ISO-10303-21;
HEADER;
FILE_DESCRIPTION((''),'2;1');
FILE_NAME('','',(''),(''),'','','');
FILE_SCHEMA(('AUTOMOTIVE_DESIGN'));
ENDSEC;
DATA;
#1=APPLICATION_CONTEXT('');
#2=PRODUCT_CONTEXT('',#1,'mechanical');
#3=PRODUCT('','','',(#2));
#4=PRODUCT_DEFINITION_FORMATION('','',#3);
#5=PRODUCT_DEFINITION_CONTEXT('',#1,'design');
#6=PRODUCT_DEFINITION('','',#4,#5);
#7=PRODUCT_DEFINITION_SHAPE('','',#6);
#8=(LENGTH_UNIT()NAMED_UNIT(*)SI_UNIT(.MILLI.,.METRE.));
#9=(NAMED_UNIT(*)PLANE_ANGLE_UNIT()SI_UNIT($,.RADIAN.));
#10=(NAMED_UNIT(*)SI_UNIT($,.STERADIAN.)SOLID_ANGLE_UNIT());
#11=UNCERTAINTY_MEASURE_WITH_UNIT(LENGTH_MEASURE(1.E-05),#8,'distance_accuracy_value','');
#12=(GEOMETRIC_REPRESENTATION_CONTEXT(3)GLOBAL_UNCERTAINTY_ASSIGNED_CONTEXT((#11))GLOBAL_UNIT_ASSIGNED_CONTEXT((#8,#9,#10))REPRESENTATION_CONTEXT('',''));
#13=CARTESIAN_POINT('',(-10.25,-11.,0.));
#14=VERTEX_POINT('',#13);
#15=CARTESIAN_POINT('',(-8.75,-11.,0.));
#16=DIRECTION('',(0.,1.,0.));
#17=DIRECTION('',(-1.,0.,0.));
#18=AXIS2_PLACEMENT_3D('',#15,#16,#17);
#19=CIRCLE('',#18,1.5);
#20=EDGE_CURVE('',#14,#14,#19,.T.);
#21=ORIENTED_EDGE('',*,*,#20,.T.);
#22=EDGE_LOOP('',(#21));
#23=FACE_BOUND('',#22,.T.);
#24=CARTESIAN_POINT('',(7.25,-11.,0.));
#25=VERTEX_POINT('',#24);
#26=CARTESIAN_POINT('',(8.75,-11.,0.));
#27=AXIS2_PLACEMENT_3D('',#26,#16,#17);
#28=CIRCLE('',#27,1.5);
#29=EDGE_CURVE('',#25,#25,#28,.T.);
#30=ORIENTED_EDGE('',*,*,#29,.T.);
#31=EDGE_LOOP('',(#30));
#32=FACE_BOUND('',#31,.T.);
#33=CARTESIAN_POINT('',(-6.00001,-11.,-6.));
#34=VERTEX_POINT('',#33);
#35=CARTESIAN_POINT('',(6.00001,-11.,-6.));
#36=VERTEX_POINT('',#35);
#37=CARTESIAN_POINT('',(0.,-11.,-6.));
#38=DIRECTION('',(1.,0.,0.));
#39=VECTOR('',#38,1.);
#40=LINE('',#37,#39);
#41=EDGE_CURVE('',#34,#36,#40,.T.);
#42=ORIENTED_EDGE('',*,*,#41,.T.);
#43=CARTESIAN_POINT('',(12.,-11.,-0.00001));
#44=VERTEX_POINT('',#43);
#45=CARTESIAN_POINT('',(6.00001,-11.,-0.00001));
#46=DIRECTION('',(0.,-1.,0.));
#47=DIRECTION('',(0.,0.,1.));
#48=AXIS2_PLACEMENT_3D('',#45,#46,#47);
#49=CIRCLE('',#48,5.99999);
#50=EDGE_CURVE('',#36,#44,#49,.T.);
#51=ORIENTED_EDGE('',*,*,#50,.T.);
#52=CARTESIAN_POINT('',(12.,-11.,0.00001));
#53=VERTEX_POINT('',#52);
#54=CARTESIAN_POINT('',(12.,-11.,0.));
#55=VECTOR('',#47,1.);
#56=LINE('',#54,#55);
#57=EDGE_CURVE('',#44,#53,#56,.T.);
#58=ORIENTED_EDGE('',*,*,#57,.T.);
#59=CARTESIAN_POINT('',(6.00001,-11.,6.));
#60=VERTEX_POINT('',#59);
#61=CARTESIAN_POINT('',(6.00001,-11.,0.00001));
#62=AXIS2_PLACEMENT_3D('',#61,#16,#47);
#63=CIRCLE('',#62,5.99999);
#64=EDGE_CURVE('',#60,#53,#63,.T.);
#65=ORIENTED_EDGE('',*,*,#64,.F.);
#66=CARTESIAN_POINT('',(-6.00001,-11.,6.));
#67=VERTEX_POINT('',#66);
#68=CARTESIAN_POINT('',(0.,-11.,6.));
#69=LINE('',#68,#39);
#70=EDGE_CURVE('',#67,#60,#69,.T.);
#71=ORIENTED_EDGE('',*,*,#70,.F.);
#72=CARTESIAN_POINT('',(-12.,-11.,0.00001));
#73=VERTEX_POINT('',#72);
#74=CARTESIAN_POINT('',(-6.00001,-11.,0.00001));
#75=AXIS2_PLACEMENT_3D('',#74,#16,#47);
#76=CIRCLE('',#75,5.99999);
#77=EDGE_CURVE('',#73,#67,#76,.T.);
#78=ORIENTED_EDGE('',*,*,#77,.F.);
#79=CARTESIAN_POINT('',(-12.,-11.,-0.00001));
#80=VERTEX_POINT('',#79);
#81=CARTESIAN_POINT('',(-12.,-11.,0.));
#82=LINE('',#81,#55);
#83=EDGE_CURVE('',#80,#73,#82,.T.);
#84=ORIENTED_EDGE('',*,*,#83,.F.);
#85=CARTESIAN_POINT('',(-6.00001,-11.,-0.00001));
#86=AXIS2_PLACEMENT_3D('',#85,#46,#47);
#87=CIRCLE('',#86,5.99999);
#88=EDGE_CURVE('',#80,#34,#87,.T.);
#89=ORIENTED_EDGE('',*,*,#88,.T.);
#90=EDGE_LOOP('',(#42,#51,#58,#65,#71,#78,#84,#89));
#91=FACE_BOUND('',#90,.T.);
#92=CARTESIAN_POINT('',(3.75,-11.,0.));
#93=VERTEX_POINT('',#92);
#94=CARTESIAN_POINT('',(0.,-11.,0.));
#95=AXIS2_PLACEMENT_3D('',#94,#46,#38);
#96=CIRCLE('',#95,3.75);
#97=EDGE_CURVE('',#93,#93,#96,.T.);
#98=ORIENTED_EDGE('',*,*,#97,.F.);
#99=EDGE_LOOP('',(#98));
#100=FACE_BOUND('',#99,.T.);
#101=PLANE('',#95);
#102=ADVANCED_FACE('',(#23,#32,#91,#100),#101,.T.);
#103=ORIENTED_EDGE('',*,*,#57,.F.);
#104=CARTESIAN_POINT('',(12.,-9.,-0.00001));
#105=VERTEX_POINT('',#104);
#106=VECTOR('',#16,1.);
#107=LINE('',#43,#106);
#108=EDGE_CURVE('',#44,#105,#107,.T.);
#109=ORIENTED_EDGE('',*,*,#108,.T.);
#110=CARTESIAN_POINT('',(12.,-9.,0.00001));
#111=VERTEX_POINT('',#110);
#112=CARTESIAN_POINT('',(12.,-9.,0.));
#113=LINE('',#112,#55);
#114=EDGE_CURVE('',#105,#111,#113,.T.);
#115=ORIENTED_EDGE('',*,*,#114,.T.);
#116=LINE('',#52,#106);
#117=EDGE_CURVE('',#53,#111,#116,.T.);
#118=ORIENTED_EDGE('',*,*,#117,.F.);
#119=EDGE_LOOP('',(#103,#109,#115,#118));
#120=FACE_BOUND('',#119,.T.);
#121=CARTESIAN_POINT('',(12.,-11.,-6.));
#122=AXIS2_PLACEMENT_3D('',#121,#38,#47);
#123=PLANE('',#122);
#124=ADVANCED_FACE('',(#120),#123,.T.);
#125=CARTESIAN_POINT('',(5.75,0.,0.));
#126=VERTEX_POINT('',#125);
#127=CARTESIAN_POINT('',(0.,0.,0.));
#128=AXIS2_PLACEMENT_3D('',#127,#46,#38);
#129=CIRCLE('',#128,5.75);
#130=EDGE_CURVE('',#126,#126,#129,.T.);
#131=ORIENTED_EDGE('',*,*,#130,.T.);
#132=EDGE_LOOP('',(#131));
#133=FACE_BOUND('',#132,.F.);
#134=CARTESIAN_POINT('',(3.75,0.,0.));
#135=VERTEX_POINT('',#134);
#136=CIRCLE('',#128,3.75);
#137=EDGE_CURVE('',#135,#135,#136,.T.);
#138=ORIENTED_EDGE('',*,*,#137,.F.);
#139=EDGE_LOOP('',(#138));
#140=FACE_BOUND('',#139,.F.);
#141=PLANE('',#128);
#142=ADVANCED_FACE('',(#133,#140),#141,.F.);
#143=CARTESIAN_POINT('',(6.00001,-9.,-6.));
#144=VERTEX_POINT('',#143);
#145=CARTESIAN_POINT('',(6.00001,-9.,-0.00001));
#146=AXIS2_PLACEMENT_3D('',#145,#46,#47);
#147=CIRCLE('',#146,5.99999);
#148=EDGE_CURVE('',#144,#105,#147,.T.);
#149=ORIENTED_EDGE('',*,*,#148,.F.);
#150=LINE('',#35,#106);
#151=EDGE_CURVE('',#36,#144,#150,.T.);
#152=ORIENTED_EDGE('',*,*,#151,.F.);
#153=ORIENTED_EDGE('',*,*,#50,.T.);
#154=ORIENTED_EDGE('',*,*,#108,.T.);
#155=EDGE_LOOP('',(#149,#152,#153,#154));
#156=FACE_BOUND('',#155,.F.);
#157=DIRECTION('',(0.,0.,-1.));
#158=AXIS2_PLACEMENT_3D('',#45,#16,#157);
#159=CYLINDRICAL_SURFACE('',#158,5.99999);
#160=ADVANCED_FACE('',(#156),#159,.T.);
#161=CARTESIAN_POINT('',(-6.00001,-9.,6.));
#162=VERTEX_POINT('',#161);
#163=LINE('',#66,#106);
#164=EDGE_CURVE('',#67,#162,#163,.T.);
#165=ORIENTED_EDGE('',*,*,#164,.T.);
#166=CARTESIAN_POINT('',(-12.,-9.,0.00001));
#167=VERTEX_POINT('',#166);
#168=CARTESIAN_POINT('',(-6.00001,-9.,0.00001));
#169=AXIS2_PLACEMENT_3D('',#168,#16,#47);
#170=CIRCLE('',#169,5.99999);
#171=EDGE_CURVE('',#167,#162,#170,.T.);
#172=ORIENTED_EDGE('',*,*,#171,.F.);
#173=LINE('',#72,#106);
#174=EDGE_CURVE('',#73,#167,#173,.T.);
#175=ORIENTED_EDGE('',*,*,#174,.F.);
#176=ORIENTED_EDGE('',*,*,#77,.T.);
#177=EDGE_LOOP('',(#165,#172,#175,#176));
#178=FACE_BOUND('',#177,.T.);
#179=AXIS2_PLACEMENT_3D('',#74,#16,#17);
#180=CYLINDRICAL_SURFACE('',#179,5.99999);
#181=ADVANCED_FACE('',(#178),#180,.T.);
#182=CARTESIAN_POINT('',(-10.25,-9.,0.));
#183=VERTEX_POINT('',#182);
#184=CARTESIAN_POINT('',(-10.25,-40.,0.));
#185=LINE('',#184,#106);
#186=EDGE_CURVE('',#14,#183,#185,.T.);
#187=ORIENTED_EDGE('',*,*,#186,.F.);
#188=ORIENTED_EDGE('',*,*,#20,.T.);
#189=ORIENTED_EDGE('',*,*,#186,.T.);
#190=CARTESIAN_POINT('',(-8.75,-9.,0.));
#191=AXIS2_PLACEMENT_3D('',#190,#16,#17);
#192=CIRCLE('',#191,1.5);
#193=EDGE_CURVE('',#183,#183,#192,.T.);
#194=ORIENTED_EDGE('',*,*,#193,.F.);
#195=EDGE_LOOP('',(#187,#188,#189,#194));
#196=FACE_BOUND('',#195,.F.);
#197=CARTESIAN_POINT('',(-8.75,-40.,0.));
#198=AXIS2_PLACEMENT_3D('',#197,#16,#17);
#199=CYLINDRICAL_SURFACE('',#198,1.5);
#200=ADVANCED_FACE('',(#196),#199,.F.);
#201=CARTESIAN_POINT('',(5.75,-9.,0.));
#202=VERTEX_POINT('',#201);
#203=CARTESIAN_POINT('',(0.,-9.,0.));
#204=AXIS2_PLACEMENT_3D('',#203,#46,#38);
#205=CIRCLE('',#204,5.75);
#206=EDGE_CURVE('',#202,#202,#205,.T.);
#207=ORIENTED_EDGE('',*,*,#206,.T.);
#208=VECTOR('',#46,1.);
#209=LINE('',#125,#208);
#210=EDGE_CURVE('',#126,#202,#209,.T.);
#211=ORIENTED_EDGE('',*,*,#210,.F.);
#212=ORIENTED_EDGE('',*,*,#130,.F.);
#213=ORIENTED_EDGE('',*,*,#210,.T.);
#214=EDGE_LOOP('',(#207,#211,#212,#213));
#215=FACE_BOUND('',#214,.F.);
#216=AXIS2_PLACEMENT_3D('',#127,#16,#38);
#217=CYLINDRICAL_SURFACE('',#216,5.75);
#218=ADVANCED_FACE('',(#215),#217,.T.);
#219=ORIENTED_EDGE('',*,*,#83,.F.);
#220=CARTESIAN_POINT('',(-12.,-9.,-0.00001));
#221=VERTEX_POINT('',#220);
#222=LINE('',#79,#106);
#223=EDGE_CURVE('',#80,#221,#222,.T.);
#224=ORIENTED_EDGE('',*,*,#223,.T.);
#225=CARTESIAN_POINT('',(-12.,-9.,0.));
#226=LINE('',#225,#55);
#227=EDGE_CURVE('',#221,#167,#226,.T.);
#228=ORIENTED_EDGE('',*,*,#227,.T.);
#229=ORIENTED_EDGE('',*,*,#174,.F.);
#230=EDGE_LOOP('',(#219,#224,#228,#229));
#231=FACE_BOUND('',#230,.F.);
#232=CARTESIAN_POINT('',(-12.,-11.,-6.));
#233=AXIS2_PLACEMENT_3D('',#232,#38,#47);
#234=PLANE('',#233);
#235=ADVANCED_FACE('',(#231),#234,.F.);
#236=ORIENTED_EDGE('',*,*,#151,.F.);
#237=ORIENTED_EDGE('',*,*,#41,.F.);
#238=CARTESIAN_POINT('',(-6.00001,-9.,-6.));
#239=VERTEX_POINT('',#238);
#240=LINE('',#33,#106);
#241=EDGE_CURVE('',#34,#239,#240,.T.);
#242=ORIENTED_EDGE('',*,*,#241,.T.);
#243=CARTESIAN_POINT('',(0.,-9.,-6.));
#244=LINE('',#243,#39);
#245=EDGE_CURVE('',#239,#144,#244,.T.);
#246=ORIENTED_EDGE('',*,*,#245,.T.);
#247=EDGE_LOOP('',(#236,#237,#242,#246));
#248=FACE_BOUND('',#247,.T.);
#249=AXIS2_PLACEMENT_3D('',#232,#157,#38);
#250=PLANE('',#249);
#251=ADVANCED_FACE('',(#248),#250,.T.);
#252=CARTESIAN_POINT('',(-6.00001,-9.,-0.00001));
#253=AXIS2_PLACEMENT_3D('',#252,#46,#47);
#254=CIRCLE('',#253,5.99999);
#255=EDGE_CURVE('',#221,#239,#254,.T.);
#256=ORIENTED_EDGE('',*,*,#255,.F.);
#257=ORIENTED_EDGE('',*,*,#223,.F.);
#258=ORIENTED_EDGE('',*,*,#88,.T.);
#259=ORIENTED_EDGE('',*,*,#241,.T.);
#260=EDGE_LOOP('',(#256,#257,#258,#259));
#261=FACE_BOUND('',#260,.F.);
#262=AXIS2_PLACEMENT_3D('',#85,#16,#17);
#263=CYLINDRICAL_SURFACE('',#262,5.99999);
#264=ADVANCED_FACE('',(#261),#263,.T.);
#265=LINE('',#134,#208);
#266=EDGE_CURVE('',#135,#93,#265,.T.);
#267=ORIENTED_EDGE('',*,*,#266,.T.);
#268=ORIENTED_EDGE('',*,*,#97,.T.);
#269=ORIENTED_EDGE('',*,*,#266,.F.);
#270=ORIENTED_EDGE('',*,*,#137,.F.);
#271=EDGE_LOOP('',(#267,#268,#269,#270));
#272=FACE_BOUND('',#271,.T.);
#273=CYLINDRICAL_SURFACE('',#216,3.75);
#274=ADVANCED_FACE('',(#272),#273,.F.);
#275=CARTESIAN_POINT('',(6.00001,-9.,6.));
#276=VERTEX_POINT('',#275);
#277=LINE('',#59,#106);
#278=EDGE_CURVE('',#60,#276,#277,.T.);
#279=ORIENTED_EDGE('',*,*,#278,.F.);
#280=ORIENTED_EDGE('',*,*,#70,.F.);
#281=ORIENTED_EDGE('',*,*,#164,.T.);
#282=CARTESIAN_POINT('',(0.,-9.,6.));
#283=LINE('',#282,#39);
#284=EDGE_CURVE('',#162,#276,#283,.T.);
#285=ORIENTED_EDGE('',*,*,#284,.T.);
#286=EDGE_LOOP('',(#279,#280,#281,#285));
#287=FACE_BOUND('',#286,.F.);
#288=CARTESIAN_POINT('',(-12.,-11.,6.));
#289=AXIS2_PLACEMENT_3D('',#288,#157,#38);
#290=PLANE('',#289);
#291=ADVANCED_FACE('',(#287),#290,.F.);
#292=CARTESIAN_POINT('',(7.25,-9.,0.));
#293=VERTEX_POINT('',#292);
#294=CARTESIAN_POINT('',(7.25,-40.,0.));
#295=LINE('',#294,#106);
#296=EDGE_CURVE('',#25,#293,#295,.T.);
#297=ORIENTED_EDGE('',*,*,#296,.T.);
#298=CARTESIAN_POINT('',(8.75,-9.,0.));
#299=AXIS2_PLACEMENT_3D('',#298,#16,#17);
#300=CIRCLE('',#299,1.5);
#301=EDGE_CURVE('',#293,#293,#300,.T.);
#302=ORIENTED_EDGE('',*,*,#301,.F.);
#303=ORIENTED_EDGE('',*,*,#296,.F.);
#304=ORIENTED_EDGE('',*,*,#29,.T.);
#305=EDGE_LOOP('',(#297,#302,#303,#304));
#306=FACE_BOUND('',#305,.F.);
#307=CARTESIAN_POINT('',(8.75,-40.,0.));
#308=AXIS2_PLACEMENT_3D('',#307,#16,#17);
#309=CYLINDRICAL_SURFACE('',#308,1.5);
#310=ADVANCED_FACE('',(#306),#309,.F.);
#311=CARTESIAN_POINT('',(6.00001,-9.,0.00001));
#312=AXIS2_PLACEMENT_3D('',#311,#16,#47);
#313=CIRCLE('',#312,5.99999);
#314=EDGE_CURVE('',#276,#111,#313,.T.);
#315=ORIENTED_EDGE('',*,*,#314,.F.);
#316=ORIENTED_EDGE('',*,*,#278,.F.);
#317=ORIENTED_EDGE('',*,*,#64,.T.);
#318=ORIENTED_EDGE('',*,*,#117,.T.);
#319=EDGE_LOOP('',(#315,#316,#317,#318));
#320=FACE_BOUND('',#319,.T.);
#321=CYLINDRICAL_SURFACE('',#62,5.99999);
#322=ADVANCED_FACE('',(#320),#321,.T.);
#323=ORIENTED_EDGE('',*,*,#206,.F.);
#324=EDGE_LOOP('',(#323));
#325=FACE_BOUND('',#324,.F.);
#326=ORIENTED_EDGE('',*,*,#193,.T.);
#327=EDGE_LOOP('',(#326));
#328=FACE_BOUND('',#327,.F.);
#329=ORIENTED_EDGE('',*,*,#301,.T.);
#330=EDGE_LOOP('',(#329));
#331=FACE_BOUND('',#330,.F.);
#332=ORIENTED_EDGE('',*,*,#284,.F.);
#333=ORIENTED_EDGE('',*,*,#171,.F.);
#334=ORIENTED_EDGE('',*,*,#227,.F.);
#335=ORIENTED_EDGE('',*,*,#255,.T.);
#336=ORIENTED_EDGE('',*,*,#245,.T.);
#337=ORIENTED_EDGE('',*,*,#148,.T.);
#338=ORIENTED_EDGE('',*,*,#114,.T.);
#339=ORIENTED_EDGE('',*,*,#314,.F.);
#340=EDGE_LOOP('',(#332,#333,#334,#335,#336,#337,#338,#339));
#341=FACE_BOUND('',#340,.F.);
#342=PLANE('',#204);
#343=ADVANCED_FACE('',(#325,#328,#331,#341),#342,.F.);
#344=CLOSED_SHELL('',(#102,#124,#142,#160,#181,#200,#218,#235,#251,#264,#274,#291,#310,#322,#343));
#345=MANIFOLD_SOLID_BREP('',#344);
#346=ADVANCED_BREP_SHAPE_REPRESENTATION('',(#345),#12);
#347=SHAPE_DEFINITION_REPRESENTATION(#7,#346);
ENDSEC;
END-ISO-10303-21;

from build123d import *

# Parameters (mm, degrees)
F0_R     = 5.75
F0_R_2   = 3.75
F1_DEPTH = 11
F2_W     = 24
F2_H     = 12
F2_R     = 5.75
F3_DEPTH = 2
F4_D     = 3
F5_R     = 5.99999


# Not quite as in the source:
# - a fillet or chamfer is up to 0.001 mm smaller than in the source, because OpenCascade refuses the exact size


with BuildPart() as f1:
    # F0 (on Front) → F1 (new body)
    with BuildSketch(Plane.XZ):
        Circle(F0_R)
        Circle(F0_R_2, mode=Mode.SUBTRACT)
    extrude(amount=F1_DEPTH)

    # F2 (on face) → F3 (join)
    with BuildSketch(Plane.XZ.offset(11)):
        Rectangle(F2_W, F2_H)
        Circle(F2_R, mode=Mode.SUBTRACT)
    extrude(amount=-F3_DEPTH)

    # F4 (through all)
    with Locations(Plane.XZ.offset(11)):
        with Locations((-8.75, 0), (8.75, 0)):
            Hole(F4_D / 2)

    # F5 (radius 6 in the source; OpenCascade refuses exactly that, so slightly less here)
    f5_edges = [f1.edges().sort_by_distance(p)[0] for p in [
        (12, -10, 6),
        (12, -10, -6),
        (-12, -10, 6),
        (-12, -10, -6),
    ]]
    fillet(f5_edges, radius=F5_R)


solid = f1.part
